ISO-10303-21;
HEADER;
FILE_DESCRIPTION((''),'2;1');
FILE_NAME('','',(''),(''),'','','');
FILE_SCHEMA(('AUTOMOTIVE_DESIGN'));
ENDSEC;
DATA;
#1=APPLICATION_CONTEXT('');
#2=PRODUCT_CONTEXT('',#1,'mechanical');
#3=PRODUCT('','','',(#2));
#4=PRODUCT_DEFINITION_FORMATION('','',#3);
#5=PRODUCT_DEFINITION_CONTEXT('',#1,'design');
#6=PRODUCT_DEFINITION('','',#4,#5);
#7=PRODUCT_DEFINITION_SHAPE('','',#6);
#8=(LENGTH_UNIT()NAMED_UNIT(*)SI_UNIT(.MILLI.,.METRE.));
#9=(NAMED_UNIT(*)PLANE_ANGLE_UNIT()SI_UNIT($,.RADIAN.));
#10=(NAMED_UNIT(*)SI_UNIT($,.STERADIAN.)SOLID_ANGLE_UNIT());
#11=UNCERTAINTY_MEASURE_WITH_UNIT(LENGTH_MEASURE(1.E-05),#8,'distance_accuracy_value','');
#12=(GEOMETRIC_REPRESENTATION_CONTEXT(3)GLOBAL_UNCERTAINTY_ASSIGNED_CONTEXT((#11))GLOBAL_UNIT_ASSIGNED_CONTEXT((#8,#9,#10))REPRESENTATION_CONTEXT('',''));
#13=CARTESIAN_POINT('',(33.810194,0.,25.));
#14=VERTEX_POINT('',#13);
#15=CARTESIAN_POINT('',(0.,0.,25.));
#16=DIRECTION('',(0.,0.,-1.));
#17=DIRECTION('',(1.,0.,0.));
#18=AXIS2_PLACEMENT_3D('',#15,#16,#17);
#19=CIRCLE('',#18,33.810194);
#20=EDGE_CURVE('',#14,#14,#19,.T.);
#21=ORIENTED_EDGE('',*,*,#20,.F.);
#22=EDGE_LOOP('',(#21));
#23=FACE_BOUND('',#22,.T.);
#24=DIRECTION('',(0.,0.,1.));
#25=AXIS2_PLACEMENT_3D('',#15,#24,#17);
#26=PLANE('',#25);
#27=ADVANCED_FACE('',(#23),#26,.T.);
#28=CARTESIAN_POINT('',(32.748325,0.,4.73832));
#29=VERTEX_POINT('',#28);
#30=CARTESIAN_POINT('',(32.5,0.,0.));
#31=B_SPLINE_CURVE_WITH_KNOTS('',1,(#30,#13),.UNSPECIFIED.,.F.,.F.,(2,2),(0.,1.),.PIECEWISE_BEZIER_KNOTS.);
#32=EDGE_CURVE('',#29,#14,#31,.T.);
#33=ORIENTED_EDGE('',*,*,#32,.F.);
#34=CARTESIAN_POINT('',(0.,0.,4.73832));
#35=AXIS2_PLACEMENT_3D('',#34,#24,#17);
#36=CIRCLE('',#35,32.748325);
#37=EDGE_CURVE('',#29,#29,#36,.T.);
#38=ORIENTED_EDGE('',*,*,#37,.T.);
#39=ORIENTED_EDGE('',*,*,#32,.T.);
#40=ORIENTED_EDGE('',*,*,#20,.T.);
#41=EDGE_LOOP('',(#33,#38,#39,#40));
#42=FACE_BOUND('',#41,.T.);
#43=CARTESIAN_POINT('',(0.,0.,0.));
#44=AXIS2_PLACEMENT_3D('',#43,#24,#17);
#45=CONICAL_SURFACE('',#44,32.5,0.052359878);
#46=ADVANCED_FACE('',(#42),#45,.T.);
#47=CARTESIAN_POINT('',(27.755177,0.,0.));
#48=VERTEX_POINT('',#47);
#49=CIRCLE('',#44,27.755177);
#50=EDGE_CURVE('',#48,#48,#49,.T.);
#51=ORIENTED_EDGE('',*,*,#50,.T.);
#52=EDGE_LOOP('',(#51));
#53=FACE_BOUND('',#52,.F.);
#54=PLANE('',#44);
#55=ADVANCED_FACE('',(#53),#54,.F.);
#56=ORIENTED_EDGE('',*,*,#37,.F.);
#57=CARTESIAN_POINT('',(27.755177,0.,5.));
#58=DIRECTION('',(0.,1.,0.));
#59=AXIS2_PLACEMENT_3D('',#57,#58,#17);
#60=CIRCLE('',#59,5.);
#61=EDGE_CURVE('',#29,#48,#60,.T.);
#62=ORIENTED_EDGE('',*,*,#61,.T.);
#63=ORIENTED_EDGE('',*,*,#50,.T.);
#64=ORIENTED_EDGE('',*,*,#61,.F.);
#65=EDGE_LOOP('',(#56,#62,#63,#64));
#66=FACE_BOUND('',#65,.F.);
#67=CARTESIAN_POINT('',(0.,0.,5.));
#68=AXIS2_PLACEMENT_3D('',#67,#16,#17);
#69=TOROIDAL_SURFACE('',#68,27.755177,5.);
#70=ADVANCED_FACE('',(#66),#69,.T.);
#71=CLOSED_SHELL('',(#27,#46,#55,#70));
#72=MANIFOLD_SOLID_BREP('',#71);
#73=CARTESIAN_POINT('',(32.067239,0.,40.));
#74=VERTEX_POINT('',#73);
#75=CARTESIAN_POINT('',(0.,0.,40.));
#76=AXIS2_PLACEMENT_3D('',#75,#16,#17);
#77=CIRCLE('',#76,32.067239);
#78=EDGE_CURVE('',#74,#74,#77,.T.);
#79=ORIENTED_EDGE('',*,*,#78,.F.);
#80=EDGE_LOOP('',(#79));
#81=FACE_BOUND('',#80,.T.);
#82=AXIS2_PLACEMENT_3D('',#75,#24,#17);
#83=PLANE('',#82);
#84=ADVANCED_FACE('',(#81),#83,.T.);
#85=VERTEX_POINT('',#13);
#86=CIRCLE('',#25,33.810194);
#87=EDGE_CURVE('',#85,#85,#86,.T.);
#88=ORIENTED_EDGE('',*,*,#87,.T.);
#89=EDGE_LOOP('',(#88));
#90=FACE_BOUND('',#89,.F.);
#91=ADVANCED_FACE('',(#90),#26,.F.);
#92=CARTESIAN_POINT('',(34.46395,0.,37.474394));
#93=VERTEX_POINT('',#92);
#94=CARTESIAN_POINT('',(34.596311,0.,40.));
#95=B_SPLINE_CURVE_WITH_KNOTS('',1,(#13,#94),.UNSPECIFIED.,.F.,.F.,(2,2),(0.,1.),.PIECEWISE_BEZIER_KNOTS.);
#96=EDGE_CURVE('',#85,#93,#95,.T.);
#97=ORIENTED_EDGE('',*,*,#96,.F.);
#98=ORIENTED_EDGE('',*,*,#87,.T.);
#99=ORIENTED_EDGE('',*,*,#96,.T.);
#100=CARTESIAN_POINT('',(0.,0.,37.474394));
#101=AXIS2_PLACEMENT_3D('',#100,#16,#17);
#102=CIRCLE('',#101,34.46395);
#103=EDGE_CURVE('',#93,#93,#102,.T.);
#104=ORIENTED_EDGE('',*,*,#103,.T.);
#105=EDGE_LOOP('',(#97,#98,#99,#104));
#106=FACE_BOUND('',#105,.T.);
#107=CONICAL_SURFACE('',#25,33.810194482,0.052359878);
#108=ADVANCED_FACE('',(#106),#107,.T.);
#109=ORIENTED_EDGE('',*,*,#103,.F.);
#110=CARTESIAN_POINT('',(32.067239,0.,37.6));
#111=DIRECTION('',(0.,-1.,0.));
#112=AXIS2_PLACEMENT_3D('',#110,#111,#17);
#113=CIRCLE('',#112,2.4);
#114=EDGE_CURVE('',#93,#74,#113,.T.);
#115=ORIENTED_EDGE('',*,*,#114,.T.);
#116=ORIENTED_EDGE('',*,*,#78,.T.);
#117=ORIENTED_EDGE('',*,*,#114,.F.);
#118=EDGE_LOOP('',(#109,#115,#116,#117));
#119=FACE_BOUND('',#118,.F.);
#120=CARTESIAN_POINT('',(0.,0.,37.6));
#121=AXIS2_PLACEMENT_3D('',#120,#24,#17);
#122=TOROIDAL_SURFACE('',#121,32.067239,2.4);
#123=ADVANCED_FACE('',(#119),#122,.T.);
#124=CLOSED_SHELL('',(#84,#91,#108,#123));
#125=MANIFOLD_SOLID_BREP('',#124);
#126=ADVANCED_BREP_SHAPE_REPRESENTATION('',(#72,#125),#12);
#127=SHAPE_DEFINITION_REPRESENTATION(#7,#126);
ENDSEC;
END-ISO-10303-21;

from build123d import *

# Parameters (mm, degrees)
F0_R     = 32.5
F1_DEPTH = 25
F1_TAPER = -3
F2_R     = 33.8101944821
F3_DEPTH = 15
F3_TAPER = -3
F4_R     = 2.4
F5_R     = 5


with BuildPart() as f1:
    # F0 (on Top) → F1 (new body)
    with BuildSketch(Plane.XY):
        Circle(F0_R)
    extrude(amount=F1_DEPTH, taper=F1_TAPER)

    # F5
    f5_edges = [f1.edges().sort_by_distance(p)[0] for p in [
        (-32.5, 0, 0),
    ]]
    fillet(f5_edges, radius=F5_R)


with BuildPart() as f3:
    # F2 (on face) → F3 (new body)
    with BuildSketch(Plane.XY.offset(25)):
        Circle(F2_R)
    extrude(amount=F3_DEPTH, taper=F3_TAPER)

    # F4
    f4_edges = [f3.edges().sort_by_distance(p)[0] for p in [
        (-34.596311, 0, 40),
    ]]
    fillet(f4_edges, radius=F4_R)


solid = Compound([f1.part, f3.part])
